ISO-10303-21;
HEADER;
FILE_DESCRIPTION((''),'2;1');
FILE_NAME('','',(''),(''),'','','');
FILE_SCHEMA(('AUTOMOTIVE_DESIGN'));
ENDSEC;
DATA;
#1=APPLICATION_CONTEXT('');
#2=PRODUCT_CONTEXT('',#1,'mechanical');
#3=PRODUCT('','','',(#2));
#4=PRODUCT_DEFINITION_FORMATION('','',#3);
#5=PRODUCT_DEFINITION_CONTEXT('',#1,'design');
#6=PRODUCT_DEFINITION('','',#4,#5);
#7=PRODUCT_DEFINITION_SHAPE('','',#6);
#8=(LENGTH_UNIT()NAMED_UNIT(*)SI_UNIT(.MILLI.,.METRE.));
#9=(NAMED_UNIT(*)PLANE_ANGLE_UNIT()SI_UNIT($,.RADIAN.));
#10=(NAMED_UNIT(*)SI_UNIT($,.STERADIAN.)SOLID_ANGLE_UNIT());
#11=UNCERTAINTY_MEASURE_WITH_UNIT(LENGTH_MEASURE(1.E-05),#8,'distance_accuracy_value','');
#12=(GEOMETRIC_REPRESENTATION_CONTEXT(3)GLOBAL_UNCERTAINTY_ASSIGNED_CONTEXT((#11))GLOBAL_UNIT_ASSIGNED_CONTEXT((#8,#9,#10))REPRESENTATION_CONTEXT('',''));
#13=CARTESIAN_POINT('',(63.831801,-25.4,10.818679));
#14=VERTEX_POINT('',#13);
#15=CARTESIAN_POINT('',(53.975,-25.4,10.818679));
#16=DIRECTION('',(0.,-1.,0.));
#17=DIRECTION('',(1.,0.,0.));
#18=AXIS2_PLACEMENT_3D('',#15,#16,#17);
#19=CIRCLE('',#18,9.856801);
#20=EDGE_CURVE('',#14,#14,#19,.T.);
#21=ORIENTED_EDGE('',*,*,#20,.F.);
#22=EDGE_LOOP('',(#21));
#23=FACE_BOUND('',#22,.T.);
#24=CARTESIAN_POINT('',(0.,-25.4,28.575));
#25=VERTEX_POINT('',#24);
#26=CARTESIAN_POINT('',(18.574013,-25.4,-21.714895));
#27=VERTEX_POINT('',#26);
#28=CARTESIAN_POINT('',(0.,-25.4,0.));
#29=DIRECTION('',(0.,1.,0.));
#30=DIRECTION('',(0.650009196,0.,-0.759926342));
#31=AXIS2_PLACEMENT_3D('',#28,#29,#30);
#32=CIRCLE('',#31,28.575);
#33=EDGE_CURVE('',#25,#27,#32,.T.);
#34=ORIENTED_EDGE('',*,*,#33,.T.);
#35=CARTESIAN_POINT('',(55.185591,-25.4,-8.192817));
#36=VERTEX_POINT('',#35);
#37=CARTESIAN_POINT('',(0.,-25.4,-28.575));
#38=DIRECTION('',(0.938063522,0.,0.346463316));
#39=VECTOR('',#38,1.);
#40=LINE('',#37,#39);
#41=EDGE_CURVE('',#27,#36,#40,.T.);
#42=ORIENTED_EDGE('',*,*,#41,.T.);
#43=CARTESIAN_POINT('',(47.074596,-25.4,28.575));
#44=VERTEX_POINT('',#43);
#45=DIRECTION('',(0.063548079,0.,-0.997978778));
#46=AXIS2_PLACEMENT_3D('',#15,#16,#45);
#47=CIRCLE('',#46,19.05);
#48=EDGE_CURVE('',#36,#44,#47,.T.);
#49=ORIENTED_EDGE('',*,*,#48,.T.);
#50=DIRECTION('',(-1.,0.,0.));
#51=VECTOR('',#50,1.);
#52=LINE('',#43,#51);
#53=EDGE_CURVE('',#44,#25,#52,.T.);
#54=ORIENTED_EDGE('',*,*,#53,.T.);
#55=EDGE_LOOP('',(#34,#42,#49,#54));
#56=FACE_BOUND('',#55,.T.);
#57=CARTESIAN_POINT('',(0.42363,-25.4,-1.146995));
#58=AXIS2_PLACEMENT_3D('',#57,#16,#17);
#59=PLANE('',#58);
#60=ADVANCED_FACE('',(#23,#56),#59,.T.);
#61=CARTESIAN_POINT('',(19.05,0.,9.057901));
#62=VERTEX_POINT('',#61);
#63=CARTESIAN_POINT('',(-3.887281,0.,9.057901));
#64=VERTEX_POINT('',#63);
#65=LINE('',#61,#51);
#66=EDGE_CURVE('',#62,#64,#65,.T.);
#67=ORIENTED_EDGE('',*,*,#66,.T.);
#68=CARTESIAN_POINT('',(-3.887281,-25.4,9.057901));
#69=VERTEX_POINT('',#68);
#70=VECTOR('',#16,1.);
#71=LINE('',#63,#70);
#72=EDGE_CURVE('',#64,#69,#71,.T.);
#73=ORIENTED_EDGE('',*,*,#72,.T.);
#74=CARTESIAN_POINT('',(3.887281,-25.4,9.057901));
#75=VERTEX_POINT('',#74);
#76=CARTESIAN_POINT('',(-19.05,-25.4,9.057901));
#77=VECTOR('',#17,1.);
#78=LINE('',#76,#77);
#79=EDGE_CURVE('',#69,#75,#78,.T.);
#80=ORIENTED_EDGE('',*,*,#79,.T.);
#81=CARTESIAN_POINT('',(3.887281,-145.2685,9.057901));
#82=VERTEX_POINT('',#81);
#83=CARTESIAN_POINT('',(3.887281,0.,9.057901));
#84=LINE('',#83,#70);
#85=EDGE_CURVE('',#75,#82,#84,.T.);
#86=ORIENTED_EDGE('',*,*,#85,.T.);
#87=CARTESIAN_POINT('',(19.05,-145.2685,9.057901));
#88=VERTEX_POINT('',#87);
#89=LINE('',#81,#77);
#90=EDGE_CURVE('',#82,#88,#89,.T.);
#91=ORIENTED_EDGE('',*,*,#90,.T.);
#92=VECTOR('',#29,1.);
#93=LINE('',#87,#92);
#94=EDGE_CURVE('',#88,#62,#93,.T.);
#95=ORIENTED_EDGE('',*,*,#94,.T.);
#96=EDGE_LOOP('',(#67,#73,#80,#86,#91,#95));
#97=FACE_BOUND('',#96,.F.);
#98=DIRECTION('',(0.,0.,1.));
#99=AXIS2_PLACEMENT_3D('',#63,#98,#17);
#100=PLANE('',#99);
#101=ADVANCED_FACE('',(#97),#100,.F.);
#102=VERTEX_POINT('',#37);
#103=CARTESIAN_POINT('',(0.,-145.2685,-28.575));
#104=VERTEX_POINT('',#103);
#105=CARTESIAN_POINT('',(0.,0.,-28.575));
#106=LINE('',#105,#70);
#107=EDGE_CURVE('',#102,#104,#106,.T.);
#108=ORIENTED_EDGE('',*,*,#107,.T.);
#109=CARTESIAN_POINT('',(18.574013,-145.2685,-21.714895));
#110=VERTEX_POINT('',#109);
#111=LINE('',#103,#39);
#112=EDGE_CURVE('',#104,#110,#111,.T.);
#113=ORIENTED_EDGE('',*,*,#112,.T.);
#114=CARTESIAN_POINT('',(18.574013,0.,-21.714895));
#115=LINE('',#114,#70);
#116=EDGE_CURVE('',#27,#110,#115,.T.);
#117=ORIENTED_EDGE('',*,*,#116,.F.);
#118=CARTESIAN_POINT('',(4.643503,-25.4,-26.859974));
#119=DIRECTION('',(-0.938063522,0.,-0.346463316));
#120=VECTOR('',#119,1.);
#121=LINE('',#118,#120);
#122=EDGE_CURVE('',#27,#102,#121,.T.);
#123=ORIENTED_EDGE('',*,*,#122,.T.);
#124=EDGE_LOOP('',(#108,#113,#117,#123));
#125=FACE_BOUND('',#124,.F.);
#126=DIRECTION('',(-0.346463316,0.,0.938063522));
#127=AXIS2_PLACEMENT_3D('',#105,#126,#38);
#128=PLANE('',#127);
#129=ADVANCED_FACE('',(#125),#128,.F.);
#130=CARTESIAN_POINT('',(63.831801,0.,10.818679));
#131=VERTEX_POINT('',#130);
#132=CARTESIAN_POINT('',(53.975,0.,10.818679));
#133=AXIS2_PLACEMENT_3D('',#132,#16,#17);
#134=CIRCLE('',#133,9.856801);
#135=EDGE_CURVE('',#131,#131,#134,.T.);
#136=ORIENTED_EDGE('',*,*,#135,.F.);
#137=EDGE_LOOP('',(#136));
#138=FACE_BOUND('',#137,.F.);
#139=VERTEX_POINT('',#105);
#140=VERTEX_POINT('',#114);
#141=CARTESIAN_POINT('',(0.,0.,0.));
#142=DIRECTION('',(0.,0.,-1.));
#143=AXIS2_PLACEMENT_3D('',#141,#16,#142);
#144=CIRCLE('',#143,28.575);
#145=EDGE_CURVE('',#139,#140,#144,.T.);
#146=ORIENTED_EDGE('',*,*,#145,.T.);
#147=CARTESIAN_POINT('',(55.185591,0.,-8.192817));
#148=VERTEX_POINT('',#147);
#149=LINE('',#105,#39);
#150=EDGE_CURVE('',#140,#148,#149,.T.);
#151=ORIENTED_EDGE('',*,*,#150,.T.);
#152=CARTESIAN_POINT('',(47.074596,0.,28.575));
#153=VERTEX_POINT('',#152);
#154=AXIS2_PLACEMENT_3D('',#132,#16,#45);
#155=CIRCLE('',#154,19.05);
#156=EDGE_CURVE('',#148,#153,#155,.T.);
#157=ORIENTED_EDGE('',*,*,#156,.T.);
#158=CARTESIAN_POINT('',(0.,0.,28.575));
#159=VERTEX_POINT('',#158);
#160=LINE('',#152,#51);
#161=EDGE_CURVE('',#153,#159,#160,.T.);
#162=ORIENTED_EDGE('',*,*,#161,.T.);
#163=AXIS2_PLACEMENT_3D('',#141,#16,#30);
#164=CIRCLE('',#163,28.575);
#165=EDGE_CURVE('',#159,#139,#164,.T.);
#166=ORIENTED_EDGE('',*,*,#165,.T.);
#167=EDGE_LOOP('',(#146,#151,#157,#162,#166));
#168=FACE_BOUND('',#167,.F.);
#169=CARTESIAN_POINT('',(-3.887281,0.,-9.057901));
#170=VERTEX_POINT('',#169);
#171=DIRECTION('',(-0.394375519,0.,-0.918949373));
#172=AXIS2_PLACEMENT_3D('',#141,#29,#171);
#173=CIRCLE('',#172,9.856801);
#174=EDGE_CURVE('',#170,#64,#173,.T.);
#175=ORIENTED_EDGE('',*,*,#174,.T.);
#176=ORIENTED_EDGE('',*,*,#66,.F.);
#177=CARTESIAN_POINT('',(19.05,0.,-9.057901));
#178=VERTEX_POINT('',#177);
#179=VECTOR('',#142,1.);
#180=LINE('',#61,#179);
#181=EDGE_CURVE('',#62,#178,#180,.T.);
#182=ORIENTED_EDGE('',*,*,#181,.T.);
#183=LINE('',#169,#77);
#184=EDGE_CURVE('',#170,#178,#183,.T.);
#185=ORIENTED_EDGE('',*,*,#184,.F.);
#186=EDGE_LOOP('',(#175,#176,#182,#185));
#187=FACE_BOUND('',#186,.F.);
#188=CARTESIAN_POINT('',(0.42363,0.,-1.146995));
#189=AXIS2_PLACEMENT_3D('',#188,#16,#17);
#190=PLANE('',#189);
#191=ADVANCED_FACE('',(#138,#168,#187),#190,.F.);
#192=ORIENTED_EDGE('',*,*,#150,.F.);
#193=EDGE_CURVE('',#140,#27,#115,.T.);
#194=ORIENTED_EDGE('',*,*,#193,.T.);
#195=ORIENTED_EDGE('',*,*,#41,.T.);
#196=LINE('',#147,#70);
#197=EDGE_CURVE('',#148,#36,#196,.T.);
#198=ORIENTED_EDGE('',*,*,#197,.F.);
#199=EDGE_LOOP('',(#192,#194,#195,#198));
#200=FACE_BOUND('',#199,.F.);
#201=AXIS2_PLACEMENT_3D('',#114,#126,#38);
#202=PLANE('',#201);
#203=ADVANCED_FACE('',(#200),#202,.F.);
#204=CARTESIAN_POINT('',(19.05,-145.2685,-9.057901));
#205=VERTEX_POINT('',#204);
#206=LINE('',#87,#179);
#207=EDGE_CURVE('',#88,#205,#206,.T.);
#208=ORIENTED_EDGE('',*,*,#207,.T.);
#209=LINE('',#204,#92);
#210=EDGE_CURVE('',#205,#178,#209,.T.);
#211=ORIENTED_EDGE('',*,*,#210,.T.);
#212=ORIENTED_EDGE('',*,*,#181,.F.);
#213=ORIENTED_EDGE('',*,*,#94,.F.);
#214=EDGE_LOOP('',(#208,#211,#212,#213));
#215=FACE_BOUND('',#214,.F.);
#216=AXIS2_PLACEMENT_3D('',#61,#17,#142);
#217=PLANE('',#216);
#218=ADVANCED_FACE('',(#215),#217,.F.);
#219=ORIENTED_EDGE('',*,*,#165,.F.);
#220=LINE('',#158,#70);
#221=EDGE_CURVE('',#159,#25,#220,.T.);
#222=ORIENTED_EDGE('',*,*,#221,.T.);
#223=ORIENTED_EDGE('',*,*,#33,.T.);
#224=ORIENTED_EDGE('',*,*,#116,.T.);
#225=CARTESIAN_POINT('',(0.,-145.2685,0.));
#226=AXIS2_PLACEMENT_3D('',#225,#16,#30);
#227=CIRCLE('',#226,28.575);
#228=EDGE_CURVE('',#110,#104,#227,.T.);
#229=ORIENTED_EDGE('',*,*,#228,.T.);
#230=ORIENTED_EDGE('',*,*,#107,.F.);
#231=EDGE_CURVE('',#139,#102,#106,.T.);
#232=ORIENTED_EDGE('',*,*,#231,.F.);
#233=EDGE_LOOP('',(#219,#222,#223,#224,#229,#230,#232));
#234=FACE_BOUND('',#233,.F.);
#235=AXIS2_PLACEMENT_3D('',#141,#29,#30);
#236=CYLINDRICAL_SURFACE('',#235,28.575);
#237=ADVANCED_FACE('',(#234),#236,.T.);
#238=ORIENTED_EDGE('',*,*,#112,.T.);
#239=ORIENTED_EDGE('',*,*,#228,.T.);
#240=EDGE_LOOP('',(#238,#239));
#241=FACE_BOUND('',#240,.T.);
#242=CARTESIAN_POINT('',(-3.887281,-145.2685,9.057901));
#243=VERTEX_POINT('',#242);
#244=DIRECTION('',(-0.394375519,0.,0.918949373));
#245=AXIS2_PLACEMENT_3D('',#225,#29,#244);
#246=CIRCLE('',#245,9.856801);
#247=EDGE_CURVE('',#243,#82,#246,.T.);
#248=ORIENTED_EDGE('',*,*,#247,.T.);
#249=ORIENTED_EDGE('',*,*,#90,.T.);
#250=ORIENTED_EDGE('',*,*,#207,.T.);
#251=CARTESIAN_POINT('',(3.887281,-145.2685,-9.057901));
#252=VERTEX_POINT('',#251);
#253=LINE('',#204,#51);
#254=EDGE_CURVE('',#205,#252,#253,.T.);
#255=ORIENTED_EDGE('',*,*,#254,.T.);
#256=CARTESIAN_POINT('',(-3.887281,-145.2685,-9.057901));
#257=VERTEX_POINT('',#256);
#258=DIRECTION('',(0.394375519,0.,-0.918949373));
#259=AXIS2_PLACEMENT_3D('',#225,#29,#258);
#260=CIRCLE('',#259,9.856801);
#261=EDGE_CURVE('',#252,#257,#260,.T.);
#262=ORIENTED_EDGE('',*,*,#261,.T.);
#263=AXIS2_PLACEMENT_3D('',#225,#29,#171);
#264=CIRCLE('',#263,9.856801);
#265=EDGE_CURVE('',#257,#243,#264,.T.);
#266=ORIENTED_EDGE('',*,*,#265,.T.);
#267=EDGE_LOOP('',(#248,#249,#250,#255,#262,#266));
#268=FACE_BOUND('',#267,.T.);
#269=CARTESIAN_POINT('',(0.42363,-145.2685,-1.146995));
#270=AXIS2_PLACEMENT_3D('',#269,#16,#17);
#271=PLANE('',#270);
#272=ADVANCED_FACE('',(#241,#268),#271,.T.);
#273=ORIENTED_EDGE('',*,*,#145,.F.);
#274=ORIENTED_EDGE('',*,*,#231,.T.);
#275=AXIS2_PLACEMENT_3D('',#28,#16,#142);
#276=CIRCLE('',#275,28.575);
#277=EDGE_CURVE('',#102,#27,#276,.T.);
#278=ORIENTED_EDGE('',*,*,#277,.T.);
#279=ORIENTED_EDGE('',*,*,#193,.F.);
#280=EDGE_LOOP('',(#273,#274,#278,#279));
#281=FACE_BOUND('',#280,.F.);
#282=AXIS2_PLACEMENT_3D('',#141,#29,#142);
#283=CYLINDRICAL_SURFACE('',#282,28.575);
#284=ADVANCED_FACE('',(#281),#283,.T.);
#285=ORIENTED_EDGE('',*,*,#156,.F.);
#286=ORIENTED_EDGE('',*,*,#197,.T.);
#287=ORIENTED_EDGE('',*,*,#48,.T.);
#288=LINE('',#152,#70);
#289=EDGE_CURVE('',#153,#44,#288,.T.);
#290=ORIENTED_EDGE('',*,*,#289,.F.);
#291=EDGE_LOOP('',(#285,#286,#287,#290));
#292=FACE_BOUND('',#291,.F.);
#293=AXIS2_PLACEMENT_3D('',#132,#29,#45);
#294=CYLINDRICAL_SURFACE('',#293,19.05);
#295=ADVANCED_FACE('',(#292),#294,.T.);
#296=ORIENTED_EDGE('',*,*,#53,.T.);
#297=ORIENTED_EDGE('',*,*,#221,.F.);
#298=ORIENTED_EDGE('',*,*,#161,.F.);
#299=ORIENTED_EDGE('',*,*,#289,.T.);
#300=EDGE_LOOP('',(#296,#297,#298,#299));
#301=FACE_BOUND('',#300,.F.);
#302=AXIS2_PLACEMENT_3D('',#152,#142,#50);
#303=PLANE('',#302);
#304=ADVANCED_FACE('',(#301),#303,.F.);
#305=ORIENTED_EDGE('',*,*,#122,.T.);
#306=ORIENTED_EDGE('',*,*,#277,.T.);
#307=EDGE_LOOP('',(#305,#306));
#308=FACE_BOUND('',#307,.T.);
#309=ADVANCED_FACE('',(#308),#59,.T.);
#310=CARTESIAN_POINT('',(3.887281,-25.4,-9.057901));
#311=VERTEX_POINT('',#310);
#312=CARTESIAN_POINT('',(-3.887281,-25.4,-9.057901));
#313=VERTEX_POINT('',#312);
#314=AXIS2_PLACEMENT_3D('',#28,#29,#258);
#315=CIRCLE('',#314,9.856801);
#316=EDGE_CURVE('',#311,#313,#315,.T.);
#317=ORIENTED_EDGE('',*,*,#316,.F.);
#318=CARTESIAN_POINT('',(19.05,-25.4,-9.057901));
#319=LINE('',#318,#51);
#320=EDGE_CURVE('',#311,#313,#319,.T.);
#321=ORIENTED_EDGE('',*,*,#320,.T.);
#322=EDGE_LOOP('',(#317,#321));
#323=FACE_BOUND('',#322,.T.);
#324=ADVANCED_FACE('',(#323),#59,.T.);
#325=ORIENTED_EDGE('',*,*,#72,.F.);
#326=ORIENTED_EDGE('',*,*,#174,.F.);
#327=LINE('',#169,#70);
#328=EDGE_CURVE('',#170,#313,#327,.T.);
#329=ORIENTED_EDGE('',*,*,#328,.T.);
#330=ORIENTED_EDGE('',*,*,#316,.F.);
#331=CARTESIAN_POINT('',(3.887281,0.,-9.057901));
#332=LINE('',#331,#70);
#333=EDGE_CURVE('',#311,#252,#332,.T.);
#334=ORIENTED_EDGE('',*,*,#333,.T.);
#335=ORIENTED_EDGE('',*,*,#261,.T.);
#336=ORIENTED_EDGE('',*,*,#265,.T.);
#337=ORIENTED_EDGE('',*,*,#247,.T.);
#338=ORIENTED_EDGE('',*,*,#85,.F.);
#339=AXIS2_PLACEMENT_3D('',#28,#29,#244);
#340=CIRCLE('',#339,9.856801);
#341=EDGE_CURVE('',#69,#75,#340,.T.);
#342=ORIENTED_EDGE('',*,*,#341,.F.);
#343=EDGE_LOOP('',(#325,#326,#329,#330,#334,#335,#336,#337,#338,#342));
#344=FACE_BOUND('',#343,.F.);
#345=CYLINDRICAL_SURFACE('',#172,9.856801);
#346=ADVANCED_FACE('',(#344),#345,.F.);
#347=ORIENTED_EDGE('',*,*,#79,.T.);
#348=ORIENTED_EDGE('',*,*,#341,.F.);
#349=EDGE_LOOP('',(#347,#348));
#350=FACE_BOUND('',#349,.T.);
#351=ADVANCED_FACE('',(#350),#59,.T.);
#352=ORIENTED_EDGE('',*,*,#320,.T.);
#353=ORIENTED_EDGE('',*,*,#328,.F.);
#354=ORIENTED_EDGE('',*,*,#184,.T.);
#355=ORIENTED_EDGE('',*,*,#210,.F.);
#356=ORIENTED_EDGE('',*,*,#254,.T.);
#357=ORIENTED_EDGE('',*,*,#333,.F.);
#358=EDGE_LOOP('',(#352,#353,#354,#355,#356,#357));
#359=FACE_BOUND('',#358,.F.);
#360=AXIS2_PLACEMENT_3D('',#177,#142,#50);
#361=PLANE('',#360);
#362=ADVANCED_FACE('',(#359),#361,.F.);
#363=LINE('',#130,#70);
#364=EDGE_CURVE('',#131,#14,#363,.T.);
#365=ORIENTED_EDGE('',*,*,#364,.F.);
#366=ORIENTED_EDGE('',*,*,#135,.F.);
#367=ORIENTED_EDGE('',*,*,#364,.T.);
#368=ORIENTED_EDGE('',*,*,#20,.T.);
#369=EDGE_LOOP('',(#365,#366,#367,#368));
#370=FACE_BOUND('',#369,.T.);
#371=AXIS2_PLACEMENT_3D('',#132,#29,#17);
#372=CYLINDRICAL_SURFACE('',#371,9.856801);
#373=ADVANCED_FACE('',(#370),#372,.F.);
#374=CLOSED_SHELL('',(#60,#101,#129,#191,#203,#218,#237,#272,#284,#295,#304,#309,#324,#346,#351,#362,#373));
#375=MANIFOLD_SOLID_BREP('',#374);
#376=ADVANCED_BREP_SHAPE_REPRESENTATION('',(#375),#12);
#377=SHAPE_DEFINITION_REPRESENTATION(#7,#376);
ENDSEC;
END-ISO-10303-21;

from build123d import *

# Parameters (mm, degrees)
F0_R     = 9.8568007518
F1_DEPTH = 25.4
F2_DEPTH = 145.2685


with BuildPart() as f1:
    # F0 (on Front) → F1 (new body)
    with BuildSketch(Plane.XZ):
        with BuildLine():
            ThreePointArc((18.574012772, -21.714895223), (25.954604986, -11.9536230918), (28.575, 0))
            ThreePointArc((28.575, 0), (20.2055762724, 20.2055762724), (0, 28.575))
            ThreePointArc((0, 28.575), (-28.575, 0), (0, -28.575))
            Line((0, -28.575), (18.574012772, -21.714895223))
        make_face()
        with BuildLine():
            ThreePointArc((-3.887280916, 9.0579008684), (0, 9.8568007518), (3.887280916, 9.0579008684))
            Line((3.887280916, 9.0579008684), (19.05, 9.0579008684))
            Line((19.05, 9.0579008684), (19.05, -9.0579008684))
            Line((19.05, -9.0579008684), (3.887280916, -9.0579008684))
            ThreePointArc((3.887280916, -9.0579008684), (0, -9.8568007518), (-3.887280916, -9.0579008684))
            Line((-3.887280916, -9.0579008684), (-19.05, -9.0579008684))
            Line((-19.05, -9.0579008684), (-19.05, 9.0579008684))
            Line((-19.05, 9.0579008684), (-3.887280916, 9.0579008684))
        make_face(mode=Mode.SUBTRACT)
        with BuildLine():
            ThreePointArc((0, 28.575), (20.2055762724, 20.2055762724), (28.575, 0))
            ThreePointArc((28.575, 0), (25.954604986, -11.9536230918), (18.574012772, -21.714895223))
            Line((18.574012772, -21.714895223), (55.185590913, -8.1928165434))
            ThreePointArc((55.185590913, -8.1928165434), (35.3722696716, 6.7149096533), (47.0745963207, 28.575))
            Line((47.0745963207, 28.575), (0, 28.575))
        make_face()
        with BuildLine():
            ThreePointArc((0, -28.575), (9.9001892407, -26.8051651366), (18.574012772, -21.714895223))
            Line((18.574012772, -21.714895223), (0, -28.575))
        make_face()
        with BuildLine():
            ThreePointArc((73.025, 10.81867918), (64.7325510668, 26.5405618613), (47.0745963207, 28.575))
            ThreePointArc((47.0745963207, 28.575), (35.3722696716, 6.7149096533), (55.185590913, -8.1928165434))
            ThreePointArc((55.185590913, -8.1928165434), (67.8668007633, -2.2166716612), (73.025, 10.81867918))
        make_face()
        with Locations((53.975, 10.81867918)):
            Circle(F0_R, mode=Mode.SUBTRACT)
        with BuildLine():
            Line((-3.887280916, 9.0579008684), (3.887280916, 9.0579008684))
            ThreePointArc((3.887280916, 9.0579008684), (0, 9.8568007518), (-3.887280916, 9.0579008684))
        make_face()
        with BuildLine():
            ThreePointArc((-3.887280916, -9.0579008684), (0, -9.8568007518), (3.887280916, -9.0579008684))
            Line((3.887280916, -9.0579008684), (-3.887280916, -9.0579008684))
        make_face()
        with BuildLine():
            ThreePointArc((-3.887280916, -9.0579008684), (-9.8568007518, 0), (-3.887280916, 9.0579008684))
            Line((-3.887280916, 9.0579008684), (-19.05, 9.0579008684))
            Line((-19.05, 9.0579008684), (-19.05, -9.0579008684))
            Line((-19.05, -9.0579008684), (-3.887280916, -9.0579008684))
        make_face()
    extrude(amount=F1_DEPTH)

    # F0 (on Front) → F2 (join)
    with BuildSketch(Plane.XZ):
        with BuildLine():
            ThreePointArc((18.574012772, -21.714895223), (25.954604986, -11.9536230918), (28.575, 0))
            ThreePointArc((28.575, 0), (20.2055762724, 20.2055762724), (0, 28.575))
            ThreePointArc((0, 28.575), (-28.575, 0), (0, -28.575))
            Line((0, -28.575), (18.574012772, -21.714895223))
        make_face()
        with BuildLine():
            ThreePointArc((-3.887280916, 9.0579008684), (0, 9.8568007518), (3.887280916, 9.0579008684))
            Line((3.887280916, 9.0579008684), (19.05, 9.0579008684))
            Line((19.05, 9.0579008684), (19.05, -9.0579008684))
            Line((19.05, -9.0579008684), (3.887280916, -9.0579008684))
            ThreePointArc((3.887280916, -9.0579008684), (0, -9.8568007518), (-3.887280916, -9.0579008684))
            Line((-3.887280916, -9.0579008684), (-19.05, -9.0579008684))
            Line((-19.05, -9.0579008684), (-19.05, 9.0579008684))
            Line((-19.05, 9.0579008684), (-3.887280916, 9.0579008684))
        make_face(mode=Mode.SUBTRACT)
        with BuildLine():
            ThreePointArc((-3.887280916, -9.0579008684), (-9.8568007518, 0), (-3.887280916, 9.0579008684))
            Line((-3.887280916, 9.0579008684), (-19.05, 9.0579008684))
            Line((-19.05, 9.0579008684), (-19.05, -9.0579008684))
            Line((-19.05, -9.0579008684), (-3.887280916, -9.0579008684))
        make_face()
    extrude(amount=F2_DEPTH)


solid = f1.part
